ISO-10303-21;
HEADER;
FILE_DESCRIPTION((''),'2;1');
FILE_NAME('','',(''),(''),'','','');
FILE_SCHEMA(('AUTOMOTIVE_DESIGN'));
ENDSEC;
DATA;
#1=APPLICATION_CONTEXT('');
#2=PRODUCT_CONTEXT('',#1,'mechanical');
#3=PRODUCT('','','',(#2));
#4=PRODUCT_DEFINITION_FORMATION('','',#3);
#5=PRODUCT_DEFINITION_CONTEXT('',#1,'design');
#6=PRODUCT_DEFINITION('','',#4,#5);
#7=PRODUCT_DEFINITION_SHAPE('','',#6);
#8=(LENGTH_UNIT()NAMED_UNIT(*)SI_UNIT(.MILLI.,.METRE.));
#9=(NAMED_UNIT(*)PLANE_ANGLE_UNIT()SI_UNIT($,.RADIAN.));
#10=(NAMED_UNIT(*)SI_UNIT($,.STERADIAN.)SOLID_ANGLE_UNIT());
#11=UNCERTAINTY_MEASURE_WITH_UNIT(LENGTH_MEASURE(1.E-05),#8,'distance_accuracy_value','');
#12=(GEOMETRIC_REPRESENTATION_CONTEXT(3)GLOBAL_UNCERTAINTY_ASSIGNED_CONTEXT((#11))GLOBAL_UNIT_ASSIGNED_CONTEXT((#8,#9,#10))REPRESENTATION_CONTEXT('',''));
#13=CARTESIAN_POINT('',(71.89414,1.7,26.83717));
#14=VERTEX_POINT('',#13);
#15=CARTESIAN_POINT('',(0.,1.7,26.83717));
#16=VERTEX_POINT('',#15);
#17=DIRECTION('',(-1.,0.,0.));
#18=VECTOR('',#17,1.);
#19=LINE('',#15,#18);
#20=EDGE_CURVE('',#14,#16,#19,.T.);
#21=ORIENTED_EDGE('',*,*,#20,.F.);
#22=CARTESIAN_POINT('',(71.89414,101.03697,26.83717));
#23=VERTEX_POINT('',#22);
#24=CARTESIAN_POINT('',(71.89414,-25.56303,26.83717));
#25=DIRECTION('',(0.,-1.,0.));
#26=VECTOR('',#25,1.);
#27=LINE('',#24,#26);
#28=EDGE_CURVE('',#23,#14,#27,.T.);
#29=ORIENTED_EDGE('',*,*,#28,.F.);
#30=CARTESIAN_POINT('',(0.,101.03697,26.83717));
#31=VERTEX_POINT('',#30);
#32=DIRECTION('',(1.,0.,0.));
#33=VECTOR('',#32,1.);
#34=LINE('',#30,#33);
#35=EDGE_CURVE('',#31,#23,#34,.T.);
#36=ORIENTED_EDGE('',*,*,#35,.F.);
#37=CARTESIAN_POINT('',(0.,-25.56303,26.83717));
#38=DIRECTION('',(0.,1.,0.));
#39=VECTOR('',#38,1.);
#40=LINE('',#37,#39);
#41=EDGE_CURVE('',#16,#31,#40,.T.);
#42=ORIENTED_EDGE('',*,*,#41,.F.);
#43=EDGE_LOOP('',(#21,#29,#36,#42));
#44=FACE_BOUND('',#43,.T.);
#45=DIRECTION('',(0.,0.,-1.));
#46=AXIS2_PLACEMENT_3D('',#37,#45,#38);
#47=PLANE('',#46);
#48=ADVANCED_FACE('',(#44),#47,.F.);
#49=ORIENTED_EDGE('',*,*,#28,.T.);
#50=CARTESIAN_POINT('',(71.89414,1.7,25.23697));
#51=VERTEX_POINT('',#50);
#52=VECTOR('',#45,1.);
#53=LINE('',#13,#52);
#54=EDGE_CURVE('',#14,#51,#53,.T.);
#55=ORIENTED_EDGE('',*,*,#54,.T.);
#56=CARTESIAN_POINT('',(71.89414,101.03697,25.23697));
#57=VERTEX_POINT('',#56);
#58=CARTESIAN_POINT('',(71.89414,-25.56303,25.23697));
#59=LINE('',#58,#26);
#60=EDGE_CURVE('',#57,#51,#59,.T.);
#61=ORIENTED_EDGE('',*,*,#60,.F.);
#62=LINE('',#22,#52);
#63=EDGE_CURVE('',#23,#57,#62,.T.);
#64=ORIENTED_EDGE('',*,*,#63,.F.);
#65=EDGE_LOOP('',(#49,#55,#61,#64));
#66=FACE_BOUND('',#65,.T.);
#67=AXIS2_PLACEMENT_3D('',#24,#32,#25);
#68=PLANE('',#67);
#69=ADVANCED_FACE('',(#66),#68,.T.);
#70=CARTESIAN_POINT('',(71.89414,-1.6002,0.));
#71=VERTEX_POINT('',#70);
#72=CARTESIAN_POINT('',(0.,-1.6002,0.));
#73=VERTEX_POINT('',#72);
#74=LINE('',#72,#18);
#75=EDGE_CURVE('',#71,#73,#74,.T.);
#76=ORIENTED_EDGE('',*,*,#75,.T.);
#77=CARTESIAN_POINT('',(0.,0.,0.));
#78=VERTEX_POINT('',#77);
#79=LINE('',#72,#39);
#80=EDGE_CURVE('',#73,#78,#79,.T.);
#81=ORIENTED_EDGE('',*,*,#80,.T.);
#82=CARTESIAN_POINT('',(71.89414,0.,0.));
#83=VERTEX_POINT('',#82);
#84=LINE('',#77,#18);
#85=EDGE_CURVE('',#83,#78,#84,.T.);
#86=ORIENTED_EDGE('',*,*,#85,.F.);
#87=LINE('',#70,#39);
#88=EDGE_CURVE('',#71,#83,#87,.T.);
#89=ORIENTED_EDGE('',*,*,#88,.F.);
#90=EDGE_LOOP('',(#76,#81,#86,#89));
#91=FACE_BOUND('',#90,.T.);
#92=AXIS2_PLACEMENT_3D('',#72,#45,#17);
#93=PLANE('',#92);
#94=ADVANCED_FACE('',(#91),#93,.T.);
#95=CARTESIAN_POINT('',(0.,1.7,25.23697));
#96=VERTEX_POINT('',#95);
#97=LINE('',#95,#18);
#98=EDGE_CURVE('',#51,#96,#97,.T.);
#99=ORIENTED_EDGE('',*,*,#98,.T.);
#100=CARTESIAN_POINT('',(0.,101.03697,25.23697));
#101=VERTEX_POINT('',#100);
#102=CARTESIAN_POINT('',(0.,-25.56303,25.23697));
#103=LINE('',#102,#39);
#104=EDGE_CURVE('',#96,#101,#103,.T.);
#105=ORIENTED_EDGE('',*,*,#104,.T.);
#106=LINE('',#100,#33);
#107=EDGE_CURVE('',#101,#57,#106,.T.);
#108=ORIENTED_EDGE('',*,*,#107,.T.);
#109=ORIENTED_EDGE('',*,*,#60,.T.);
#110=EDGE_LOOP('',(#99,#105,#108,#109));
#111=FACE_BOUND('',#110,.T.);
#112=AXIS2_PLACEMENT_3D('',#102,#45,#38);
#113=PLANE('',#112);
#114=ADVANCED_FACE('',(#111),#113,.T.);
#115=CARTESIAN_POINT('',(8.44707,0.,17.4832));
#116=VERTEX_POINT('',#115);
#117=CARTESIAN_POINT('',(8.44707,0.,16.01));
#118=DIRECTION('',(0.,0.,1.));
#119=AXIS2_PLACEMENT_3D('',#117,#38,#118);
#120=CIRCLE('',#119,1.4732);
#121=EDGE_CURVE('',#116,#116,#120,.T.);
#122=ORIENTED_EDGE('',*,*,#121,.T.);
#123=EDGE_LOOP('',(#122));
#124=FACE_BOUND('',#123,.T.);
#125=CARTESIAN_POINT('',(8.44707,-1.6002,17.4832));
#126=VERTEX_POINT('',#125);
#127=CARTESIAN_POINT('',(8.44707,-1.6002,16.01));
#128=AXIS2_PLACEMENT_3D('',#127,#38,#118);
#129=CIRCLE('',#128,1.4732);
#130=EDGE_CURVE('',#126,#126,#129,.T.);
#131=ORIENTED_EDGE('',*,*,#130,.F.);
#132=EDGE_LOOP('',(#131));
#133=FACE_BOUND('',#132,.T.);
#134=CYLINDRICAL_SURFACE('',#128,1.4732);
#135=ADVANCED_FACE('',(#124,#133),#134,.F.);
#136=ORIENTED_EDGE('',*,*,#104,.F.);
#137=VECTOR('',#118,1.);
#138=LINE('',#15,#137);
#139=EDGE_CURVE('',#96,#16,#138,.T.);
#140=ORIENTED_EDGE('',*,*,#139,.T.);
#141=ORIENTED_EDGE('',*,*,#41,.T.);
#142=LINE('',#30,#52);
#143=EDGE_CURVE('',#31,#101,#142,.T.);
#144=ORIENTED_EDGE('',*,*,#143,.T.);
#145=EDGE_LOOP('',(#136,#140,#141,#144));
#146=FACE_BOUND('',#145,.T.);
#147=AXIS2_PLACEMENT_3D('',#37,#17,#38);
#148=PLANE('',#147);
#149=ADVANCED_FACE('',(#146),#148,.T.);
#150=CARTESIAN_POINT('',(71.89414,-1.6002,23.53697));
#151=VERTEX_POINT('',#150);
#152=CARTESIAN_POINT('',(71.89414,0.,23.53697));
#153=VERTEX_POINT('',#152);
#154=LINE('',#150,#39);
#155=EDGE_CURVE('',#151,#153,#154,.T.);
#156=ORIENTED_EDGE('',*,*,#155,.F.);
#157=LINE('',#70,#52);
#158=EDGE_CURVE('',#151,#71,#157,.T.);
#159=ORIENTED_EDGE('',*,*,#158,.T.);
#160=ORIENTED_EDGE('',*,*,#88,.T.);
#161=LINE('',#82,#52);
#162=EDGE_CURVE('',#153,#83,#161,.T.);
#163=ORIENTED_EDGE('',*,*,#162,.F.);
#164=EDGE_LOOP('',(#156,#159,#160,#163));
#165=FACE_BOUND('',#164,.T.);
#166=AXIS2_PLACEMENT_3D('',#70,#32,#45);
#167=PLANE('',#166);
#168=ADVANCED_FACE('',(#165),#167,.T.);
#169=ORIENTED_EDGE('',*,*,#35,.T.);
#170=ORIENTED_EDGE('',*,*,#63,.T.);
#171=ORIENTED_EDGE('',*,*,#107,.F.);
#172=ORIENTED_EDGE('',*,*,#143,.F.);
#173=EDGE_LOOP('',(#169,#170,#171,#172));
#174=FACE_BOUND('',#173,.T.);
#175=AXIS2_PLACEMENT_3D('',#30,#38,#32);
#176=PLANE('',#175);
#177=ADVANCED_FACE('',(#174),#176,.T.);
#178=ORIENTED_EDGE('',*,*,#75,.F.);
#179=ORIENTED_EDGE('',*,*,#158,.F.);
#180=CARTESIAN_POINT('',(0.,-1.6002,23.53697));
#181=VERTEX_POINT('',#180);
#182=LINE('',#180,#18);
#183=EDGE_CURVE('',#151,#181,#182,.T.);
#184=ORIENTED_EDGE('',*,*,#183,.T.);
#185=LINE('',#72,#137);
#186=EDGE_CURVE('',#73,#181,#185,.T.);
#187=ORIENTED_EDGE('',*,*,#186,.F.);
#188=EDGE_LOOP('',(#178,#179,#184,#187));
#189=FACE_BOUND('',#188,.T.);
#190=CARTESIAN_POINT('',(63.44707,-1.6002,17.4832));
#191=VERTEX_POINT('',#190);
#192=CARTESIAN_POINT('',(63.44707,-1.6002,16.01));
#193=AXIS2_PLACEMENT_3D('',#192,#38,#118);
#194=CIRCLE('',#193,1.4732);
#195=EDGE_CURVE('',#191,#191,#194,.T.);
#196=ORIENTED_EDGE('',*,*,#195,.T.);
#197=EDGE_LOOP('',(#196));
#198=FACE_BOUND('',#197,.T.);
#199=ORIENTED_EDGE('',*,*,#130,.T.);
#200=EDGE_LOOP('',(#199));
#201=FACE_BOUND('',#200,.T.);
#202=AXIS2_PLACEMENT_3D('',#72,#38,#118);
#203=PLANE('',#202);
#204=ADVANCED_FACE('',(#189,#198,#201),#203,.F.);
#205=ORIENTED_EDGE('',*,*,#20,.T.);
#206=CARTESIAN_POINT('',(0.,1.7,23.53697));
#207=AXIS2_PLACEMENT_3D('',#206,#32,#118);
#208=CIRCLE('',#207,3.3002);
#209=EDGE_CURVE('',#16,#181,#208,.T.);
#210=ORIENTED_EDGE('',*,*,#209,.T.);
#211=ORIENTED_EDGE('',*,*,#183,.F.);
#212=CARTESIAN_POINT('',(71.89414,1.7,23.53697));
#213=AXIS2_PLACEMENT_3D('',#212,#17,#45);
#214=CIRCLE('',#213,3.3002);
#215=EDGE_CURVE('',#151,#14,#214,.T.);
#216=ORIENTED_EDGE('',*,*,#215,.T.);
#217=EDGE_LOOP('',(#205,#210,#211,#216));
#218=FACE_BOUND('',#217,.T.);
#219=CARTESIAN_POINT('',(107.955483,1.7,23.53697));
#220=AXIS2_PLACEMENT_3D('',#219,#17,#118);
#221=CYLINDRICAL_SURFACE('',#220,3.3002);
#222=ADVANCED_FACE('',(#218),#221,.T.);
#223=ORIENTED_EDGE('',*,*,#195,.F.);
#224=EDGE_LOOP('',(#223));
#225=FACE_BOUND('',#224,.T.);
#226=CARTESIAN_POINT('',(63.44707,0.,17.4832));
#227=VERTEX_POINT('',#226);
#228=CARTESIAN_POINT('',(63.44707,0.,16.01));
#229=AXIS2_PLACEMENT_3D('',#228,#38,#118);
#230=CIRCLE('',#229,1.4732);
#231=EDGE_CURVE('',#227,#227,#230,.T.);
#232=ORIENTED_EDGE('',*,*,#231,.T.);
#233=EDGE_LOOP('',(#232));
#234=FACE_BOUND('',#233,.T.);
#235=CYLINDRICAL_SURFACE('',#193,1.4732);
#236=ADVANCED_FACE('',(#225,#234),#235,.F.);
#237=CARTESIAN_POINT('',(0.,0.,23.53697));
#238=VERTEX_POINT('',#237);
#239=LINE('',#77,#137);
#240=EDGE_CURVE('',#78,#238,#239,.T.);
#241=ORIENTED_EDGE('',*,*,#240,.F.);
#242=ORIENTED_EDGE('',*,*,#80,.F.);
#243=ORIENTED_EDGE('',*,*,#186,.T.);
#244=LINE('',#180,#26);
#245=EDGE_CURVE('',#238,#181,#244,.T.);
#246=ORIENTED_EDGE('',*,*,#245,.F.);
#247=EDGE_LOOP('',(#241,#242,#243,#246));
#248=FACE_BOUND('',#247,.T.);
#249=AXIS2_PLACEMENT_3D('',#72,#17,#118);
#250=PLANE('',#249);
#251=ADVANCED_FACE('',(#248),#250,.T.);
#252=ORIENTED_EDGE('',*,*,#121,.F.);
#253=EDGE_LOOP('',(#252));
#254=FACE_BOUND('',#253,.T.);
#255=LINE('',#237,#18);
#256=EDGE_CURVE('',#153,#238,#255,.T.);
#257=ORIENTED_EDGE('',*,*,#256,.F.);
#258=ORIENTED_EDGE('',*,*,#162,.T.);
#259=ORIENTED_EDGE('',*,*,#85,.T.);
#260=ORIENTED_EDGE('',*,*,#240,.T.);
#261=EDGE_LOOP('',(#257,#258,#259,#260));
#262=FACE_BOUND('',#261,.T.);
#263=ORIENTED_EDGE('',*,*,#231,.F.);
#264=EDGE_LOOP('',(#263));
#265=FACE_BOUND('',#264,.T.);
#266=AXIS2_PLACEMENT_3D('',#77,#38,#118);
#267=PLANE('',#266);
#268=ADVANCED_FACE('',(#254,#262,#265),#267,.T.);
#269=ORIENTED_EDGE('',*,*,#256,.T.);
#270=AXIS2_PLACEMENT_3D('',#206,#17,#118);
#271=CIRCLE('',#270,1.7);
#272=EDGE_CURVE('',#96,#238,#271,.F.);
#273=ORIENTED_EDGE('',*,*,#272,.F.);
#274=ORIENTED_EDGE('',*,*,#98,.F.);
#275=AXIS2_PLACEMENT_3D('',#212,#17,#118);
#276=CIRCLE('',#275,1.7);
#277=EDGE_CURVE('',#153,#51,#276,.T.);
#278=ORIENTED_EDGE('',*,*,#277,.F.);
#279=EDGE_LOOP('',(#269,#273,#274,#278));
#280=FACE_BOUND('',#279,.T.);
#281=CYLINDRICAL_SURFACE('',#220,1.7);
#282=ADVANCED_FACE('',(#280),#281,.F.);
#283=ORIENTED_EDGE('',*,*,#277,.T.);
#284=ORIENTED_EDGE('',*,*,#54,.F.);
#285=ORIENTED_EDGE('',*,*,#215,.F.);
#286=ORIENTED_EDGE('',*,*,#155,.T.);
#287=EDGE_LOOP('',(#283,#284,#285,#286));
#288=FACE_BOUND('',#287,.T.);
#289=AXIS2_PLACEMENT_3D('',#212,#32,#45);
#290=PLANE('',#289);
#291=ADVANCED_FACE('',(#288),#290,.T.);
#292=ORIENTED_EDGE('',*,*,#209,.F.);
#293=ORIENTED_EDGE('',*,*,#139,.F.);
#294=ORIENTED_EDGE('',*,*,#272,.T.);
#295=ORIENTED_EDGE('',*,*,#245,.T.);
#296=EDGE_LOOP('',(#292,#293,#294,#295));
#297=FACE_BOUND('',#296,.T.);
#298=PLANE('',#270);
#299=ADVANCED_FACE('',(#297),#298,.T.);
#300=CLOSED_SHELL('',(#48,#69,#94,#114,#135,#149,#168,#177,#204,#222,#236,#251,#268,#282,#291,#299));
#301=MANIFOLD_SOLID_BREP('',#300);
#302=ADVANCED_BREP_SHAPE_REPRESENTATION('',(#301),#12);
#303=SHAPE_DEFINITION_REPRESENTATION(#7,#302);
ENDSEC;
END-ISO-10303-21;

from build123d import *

# Parameters (mm, degrees)
SKETCH1_W              = 71.89414
SKETCH1_H              = 126.6
SKETCH1_R              = 1.4732
BASE_FLANGE1_DEPTH     = 1.6002
SKETCHED_BEND1_DEPTH   = 71.89414
SKETCHED_BEND1_2_DEPTH = 71.89414


# Read off the part's stored shape, not the designer's step: Sketched Bend1
# Sheet-metal steps are written as plain solids
with BuildPart() as part:
    # Sketch1 → Base-Flange1 (new body)
    with BuildSketch(Plane(origin=(0, 0, 0), x_dir=(1, 0, 0), z_dir=(0, 1, 0))):
        with Locations((35.94707, -63.3)):
            Rectangle(SKETCH1_W, SKETCH1_H)
        with Locations(Location((8.44707, -16.01, 0), (0, 0, 270))):
            Circle(SKETCH1_R, mode=Mode.SUBTRACT)
        with Locations(Location((63.44707, -16.01, 0), (0, 0, 270))):
            Circle(SKETCH1_R, mode=Mode.SUBTRACT)
    extrude(amount=-BASE_FLANGE1_DEPTH)

    # Sketched Bend1 outline → Sketched Bend1 (cut)
    with BuildSketch(Plane.YZ):
        with BuildLine():
            ThreePointArc((-1.6002, 23.536969583), (-1.172425807, 25.16192805), (0, 26.36563005))
            Line((0, 26.36563005), (0, 126.6))
            Line((0, 126.6), (-1.6002, 126.6))
            Line((-1.6002, 126.6), (-1.6002, 23.536969583))
        make_face()
    extrude(amount=SKETCHED_BEND1_DEPTH, mode=Mode.SUBTRACT)

    # Sketched Bend1 2 outline → Sketched Bend1 2 (add)
    with BuildSketch(Plane.YZ):
        with BuildLine():
            ThreePointArc((0, 23.536969583), (0.497918472, 24.739051111), (1.7, 25.236969583))
            Line((1.7, 25.236969583), (101.036969583, 25.236969583))
            Line((101.036969583, 25.236969583), (101.036969583, 26.837169583))
            Line((101.036969583, 26.837169583), (1.7, 26.837169583))
            ThreePointArc((1.7, 26.837169583), (0.817907384, 26.717100501), (0, 26.36563005))
            Line((0, 26.36563005), (0, 23.536969583))
        make_face()
    extrude(amount=SKETCHED_BEND1_2_DEPTH)


solid = part.part
